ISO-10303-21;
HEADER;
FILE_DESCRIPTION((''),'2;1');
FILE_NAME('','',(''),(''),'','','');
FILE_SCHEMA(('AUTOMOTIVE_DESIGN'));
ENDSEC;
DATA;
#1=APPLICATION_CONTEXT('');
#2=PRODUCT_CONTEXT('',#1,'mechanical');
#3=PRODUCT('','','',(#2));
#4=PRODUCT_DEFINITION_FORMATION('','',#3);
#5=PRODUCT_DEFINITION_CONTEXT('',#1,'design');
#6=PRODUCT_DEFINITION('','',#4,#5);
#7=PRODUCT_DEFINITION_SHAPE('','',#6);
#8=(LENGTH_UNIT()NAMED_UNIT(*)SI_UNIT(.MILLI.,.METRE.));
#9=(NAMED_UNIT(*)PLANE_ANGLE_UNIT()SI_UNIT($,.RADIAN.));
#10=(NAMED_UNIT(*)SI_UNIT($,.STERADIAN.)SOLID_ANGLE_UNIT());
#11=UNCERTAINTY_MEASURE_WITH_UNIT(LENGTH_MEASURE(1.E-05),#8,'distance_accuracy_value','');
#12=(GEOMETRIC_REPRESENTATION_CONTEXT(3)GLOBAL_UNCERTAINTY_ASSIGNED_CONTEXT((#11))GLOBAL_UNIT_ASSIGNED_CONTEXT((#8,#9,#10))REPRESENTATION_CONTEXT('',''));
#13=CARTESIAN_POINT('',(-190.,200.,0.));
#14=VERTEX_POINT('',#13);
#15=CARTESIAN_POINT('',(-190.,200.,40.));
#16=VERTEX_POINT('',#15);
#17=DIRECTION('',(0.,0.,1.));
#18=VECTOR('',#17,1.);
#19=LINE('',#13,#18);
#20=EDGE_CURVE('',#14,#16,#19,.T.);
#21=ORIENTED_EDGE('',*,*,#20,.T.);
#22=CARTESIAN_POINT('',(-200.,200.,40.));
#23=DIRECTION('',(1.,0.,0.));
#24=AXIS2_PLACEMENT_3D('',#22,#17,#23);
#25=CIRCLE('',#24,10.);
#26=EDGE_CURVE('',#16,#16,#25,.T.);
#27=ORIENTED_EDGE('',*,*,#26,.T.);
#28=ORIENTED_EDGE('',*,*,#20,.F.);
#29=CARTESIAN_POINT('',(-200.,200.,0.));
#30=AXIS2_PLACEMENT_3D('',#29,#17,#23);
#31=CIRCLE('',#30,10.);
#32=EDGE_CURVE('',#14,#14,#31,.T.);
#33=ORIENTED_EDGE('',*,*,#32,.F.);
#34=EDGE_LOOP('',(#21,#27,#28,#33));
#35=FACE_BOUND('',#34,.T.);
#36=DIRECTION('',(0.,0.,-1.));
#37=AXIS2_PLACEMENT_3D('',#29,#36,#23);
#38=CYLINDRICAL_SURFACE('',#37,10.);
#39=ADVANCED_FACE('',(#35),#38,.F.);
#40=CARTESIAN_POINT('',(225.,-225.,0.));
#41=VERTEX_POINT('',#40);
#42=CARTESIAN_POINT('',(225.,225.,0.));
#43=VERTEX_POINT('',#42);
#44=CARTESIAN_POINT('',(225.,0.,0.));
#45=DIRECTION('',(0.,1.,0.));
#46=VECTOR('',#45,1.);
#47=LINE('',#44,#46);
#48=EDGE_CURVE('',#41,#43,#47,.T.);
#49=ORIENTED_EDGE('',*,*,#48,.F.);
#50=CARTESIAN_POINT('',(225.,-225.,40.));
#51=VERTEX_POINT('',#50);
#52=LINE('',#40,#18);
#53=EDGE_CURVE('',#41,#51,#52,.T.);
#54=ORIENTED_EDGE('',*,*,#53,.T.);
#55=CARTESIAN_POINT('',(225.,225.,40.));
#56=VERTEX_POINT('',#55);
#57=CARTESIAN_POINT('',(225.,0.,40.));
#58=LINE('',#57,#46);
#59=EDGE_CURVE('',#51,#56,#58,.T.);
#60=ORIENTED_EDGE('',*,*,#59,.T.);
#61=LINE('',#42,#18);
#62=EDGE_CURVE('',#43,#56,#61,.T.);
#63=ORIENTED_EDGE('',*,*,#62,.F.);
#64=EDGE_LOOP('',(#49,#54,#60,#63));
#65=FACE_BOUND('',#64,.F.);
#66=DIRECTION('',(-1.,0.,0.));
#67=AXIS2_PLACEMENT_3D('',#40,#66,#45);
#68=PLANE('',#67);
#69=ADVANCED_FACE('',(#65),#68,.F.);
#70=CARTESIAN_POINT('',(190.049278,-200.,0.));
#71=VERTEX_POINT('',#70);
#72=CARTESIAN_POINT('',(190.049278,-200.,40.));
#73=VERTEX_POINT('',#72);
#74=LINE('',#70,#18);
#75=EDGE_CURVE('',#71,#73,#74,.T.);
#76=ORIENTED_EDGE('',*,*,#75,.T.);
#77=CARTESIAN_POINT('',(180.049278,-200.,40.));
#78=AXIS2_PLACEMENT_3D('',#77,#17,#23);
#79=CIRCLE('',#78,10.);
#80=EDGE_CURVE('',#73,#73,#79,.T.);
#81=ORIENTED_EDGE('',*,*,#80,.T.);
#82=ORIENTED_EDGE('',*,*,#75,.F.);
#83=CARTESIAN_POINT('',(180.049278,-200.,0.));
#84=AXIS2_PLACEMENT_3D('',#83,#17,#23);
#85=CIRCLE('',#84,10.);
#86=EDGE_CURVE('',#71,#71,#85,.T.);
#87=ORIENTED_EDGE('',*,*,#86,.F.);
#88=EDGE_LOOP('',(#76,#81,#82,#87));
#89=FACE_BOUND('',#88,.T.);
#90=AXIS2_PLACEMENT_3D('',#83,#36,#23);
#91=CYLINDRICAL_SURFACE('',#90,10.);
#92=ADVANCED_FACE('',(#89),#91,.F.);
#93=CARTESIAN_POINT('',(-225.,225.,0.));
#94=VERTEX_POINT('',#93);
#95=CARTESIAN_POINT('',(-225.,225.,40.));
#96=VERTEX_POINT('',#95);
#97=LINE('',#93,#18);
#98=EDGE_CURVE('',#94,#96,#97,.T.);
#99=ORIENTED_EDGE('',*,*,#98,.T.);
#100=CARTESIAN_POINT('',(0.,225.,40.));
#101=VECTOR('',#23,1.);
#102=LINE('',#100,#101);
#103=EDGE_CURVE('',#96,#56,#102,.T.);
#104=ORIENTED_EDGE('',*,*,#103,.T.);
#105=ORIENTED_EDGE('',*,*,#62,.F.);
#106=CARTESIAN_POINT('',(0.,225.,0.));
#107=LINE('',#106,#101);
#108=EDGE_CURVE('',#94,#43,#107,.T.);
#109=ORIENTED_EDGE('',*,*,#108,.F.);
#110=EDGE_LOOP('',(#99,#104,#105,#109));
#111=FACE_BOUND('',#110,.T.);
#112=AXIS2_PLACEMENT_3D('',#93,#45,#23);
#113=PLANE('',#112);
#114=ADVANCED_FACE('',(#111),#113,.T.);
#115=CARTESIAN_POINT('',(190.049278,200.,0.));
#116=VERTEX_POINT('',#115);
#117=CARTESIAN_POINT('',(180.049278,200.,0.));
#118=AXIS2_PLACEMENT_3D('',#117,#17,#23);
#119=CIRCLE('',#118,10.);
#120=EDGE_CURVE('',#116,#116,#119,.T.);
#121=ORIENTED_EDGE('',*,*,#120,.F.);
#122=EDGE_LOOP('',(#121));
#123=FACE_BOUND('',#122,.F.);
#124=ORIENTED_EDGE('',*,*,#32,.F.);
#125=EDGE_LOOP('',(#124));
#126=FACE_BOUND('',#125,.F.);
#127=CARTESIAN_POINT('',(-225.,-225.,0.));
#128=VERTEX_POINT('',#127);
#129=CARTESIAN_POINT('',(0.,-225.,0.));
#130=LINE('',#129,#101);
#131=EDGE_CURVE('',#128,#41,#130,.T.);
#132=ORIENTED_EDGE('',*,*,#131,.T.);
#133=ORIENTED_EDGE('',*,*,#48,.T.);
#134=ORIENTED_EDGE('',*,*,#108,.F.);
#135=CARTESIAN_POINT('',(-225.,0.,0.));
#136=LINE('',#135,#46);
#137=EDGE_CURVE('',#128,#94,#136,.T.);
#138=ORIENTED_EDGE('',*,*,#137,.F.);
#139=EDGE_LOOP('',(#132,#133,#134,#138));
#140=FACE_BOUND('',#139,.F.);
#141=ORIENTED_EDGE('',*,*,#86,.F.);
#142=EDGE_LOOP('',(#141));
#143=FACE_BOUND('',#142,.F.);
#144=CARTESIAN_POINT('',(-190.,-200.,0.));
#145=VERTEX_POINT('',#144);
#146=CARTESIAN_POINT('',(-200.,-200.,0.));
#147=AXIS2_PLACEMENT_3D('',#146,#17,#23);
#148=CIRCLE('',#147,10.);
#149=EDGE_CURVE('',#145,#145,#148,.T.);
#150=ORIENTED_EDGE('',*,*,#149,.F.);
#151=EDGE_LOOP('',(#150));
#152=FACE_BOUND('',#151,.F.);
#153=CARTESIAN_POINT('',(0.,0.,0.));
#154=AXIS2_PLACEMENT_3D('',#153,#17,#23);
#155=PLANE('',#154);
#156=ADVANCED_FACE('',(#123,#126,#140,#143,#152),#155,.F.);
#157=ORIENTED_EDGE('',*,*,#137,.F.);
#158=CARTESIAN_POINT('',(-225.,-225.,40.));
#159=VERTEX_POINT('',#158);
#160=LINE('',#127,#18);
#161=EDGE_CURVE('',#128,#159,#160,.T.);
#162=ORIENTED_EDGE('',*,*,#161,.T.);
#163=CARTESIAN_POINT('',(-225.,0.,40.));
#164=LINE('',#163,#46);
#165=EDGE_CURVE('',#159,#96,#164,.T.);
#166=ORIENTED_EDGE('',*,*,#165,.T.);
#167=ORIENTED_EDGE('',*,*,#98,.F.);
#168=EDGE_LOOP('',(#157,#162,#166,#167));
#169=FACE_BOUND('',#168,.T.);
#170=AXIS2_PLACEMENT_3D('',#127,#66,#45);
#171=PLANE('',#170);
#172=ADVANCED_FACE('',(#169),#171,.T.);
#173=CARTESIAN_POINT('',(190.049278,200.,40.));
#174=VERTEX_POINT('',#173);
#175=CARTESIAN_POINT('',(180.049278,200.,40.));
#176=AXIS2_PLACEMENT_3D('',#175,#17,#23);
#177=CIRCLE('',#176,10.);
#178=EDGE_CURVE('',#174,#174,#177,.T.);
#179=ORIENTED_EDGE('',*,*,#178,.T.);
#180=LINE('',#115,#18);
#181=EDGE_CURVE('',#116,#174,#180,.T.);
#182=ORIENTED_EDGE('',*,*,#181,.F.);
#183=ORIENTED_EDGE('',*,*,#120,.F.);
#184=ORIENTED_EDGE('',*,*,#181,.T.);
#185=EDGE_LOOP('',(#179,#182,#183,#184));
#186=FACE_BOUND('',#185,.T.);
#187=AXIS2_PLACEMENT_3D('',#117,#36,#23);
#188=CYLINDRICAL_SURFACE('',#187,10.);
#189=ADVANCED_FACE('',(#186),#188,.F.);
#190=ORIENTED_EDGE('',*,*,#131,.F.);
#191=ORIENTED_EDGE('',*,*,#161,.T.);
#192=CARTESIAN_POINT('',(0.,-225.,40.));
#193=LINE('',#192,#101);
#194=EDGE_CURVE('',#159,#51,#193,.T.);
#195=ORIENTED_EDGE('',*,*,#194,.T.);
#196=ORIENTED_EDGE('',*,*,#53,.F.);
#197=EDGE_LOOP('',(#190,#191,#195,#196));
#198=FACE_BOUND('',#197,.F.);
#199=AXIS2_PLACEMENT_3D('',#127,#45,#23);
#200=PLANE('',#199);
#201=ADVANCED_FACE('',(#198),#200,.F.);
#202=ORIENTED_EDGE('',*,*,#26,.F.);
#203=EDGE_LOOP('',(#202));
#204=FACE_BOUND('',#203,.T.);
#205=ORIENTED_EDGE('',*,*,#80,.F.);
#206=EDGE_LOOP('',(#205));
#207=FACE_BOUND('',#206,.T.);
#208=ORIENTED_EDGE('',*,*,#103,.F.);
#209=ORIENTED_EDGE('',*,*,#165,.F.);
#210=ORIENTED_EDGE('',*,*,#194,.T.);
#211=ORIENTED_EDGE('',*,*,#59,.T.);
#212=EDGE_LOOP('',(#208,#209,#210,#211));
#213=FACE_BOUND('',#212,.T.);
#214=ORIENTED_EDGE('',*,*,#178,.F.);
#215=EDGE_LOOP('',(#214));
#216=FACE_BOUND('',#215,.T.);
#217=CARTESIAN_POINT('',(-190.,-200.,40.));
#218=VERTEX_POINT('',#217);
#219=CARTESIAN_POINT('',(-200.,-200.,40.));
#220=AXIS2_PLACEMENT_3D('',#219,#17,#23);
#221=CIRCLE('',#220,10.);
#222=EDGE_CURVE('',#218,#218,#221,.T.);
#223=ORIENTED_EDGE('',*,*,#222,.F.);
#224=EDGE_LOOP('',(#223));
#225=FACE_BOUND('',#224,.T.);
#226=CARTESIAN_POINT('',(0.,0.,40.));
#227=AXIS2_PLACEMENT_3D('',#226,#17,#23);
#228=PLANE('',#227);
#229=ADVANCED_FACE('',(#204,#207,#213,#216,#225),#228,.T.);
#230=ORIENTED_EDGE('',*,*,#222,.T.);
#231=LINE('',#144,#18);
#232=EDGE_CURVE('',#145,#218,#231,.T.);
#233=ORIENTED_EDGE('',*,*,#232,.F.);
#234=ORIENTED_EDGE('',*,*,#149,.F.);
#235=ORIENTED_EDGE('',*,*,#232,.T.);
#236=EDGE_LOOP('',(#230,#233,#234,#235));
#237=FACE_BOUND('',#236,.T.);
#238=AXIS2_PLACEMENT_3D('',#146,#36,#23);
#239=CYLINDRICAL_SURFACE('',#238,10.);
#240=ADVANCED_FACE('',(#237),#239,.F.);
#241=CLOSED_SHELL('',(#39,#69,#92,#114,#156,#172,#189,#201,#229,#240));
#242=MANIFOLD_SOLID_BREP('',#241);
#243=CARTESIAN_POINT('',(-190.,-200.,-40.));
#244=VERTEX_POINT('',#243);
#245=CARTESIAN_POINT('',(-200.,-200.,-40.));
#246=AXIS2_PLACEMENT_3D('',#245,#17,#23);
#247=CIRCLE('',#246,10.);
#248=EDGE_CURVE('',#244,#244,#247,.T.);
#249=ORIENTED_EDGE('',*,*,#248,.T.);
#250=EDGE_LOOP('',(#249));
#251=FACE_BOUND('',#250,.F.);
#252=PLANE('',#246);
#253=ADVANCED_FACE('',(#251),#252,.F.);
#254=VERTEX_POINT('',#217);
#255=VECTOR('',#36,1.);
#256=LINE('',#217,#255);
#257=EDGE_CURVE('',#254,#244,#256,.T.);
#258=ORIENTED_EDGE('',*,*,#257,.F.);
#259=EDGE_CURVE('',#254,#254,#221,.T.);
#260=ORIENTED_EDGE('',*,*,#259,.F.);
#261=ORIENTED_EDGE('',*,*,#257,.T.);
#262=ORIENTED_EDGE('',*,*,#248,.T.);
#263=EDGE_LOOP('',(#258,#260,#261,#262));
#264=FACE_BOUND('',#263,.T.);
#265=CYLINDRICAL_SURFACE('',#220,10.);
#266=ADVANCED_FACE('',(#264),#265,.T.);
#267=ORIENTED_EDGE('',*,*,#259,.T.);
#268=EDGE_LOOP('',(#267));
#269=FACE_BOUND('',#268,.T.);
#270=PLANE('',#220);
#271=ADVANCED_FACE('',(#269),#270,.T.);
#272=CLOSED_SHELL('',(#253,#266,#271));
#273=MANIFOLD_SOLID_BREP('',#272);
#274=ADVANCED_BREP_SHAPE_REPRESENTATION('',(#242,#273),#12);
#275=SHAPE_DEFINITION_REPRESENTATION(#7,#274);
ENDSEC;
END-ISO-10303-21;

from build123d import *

# Parameters (mm, degrees)
F0_W     = 450
F0_H     = 450
F0_R     = 10
F1_DEPTH = 40
F2_R     = 10
F3_DEPTH = 80


# Not quite as in the source:
# - the program builds the solid bodies; features that only make, move or delete a surface that nothing else refers to are left out


with BuildPart() as f1:
    # F0 (on Top) → F1 (new body)
    with BuildSketch(Plane.XY):
        Rectangle(F0_W, F0_H)
        with Locations((-200, -200)):
            Circle(F0_R, mode=Mode.SUBTRACT)
        with Locations((180.0492778565, -200)):
            Circle(F0_R, mode=Mode.SUBTRACT)
        with Locations((-200, 200)):
            Circle(F0_R, mode=Mode.SUBTRACT)
        with Locations((180.0492778565, 200)):
            Circle(F0_R, mode=Mode.SUBTRACT)
    extrude(amount=F1_DEPTH)


with BuildPart() as f3:
    # F2 (on face) → F3 (new body)
    with BuildSketch(Plane.XY.offset(40)):
        with Locations((-200, -200)):
            Circle(F2_R)
    extrude(amount=-F3_DEPTH)


solid = Compound([f1.part, f3.part])
